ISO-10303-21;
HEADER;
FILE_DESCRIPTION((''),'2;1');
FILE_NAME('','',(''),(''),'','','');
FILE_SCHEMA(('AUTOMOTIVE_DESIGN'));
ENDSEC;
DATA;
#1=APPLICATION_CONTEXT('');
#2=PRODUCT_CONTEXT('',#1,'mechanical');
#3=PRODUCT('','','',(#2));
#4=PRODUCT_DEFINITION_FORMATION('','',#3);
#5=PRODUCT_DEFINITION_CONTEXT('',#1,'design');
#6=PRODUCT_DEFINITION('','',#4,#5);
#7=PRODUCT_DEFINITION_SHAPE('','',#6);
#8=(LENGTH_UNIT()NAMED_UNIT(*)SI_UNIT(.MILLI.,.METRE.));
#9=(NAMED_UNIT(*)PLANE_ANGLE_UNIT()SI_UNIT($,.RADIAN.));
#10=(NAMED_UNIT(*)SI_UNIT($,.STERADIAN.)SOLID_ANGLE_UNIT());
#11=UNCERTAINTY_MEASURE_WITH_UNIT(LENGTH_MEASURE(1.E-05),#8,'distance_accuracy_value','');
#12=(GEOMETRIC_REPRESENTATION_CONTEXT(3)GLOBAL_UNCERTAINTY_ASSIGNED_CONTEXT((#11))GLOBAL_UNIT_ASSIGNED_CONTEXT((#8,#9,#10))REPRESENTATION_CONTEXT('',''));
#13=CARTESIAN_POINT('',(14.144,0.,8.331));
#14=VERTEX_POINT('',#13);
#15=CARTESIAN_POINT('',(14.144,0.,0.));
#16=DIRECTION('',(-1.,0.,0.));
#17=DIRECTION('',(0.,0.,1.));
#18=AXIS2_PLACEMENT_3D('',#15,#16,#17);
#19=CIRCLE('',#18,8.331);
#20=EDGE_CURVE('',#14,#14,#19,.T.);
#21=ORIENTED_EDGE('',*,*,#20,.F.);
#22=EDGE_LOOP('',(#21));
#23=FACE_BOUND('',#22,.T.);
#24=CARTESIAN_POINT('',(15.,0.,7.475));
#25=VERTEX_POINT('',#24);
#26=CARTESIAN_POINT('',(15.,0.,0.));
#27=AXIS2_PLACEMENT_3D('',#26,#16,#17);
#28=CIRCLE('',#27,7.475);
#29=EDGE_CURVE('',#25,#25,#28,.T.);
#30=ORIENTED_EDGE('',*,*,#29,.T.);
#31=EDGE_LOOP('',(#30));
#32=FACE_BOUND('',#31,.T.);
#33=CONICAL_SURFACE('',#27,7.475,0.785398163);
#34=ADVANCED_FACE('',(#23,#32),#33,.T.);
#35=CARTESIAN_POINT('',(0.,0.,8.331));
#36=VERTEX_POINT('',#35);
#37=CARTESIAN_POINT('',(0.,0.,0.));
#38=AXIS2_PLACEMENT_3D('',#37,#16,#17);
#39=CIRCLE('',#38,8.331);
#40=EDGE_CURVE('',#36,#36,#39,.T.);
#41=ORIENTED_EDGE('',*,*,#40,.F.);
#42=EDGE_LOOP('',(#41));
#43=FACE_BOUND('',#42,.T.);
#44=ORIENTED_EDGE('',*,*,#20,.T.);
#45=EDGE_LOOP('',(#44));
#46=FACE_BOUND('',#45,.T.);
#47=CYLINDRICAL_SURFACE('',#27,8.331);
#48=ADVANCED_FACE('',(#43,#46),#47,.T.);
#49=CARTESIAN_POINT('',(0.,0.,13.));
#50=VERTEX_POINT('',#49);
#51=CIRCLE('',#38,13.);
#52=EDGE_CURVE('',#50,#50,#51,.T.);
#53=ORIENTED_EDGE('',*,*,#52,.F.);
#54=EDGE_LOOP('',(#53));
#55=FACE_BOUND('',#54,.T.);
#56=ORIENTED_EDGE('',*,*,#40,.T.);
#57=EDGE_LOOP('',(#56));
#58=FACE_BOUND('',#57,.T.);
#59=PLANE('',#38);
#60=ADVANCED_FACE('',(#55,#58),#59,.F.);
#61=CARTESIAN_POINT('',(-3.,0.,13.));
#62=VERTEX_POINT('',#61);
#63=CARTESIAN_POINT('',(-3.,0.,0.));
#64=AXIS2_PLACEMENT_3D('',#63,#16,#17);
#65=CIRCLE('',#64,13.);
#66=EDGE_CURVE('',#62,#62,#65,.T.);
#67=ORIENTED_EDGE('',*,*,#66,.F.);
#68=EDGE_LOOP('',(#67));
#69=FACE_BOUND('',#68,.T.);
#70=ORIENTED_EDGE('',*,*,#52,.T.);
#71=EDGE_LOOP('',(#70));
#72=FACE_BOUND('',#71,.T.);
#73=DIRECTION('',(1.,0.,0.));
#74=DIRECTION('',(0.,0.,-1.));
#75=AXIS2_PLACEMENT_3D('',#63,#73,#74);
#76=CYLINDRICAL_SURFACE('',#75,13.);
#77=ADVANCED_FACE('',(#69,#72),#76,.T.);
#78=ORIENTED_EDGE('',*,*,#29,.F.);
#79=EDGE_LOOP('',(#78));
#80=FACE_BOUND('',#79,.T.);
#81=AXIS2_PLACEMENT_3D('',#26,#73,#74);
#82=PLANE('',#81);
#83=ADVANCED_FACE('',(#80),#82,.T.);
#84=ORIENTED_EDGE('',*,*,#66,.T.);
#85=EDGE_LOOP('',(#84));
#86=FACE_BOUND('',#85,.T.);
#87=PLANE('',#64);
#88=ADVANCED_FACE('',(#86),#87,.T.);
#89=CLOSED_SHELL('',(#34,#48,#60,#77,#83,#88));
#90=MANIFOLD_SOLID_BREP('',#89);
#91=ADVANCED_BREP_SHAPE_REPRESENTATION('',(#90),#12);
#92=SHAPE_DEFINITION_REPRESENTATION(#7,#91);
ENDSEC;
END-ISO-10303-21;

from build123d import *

# Parameters (mm, degrees)
SKETCH1_R           = 10
BOSS_EXTRUDE1_DEPTH = 15
SKETCH2_R           = 13
BOSS_EXTRUDE2_DEPTH = 3


# Read off the part's stored shape, not the designer's step: G3/8 Straight Pipe Tapped Thread Stud1
with BuildPart() as part:
    # Sketch1 → Boss-Extrude1 (new body)
    with BuildSketch(Plane(origin=(0, 0, 0), x_dir=(0, 0, -1), z_dir=(1, 0, 0))):
        Circle(SKETCH1_R)
    extrude(amount=BOSS_EXTRUDE1_DEPTH)

    # Sketch2 → Boss-Extrude2 (add)
    with BuildSketch(Plane.ZY):
        Circle(SKETCH2_R)
    extrude(amount=BOSS_EXTRUDE2_DEPTH)

    # G3/8 Straight Pipe Tapped Thread Stud1 o → G3/8 Straight Pipe Tapped Thread Stud1 (revolve, cut)
    with BuildSketch(Plane.YX):
        Polygon((10, 15), (7.475, 15), (8.331, 14.144), (8.331, 0), (10, 0), align=None)
    revolve(axis=Axis((0, 0, 0), (1, 0, 0)), mode=Mode.SUBTRACT)


solid = part.part
